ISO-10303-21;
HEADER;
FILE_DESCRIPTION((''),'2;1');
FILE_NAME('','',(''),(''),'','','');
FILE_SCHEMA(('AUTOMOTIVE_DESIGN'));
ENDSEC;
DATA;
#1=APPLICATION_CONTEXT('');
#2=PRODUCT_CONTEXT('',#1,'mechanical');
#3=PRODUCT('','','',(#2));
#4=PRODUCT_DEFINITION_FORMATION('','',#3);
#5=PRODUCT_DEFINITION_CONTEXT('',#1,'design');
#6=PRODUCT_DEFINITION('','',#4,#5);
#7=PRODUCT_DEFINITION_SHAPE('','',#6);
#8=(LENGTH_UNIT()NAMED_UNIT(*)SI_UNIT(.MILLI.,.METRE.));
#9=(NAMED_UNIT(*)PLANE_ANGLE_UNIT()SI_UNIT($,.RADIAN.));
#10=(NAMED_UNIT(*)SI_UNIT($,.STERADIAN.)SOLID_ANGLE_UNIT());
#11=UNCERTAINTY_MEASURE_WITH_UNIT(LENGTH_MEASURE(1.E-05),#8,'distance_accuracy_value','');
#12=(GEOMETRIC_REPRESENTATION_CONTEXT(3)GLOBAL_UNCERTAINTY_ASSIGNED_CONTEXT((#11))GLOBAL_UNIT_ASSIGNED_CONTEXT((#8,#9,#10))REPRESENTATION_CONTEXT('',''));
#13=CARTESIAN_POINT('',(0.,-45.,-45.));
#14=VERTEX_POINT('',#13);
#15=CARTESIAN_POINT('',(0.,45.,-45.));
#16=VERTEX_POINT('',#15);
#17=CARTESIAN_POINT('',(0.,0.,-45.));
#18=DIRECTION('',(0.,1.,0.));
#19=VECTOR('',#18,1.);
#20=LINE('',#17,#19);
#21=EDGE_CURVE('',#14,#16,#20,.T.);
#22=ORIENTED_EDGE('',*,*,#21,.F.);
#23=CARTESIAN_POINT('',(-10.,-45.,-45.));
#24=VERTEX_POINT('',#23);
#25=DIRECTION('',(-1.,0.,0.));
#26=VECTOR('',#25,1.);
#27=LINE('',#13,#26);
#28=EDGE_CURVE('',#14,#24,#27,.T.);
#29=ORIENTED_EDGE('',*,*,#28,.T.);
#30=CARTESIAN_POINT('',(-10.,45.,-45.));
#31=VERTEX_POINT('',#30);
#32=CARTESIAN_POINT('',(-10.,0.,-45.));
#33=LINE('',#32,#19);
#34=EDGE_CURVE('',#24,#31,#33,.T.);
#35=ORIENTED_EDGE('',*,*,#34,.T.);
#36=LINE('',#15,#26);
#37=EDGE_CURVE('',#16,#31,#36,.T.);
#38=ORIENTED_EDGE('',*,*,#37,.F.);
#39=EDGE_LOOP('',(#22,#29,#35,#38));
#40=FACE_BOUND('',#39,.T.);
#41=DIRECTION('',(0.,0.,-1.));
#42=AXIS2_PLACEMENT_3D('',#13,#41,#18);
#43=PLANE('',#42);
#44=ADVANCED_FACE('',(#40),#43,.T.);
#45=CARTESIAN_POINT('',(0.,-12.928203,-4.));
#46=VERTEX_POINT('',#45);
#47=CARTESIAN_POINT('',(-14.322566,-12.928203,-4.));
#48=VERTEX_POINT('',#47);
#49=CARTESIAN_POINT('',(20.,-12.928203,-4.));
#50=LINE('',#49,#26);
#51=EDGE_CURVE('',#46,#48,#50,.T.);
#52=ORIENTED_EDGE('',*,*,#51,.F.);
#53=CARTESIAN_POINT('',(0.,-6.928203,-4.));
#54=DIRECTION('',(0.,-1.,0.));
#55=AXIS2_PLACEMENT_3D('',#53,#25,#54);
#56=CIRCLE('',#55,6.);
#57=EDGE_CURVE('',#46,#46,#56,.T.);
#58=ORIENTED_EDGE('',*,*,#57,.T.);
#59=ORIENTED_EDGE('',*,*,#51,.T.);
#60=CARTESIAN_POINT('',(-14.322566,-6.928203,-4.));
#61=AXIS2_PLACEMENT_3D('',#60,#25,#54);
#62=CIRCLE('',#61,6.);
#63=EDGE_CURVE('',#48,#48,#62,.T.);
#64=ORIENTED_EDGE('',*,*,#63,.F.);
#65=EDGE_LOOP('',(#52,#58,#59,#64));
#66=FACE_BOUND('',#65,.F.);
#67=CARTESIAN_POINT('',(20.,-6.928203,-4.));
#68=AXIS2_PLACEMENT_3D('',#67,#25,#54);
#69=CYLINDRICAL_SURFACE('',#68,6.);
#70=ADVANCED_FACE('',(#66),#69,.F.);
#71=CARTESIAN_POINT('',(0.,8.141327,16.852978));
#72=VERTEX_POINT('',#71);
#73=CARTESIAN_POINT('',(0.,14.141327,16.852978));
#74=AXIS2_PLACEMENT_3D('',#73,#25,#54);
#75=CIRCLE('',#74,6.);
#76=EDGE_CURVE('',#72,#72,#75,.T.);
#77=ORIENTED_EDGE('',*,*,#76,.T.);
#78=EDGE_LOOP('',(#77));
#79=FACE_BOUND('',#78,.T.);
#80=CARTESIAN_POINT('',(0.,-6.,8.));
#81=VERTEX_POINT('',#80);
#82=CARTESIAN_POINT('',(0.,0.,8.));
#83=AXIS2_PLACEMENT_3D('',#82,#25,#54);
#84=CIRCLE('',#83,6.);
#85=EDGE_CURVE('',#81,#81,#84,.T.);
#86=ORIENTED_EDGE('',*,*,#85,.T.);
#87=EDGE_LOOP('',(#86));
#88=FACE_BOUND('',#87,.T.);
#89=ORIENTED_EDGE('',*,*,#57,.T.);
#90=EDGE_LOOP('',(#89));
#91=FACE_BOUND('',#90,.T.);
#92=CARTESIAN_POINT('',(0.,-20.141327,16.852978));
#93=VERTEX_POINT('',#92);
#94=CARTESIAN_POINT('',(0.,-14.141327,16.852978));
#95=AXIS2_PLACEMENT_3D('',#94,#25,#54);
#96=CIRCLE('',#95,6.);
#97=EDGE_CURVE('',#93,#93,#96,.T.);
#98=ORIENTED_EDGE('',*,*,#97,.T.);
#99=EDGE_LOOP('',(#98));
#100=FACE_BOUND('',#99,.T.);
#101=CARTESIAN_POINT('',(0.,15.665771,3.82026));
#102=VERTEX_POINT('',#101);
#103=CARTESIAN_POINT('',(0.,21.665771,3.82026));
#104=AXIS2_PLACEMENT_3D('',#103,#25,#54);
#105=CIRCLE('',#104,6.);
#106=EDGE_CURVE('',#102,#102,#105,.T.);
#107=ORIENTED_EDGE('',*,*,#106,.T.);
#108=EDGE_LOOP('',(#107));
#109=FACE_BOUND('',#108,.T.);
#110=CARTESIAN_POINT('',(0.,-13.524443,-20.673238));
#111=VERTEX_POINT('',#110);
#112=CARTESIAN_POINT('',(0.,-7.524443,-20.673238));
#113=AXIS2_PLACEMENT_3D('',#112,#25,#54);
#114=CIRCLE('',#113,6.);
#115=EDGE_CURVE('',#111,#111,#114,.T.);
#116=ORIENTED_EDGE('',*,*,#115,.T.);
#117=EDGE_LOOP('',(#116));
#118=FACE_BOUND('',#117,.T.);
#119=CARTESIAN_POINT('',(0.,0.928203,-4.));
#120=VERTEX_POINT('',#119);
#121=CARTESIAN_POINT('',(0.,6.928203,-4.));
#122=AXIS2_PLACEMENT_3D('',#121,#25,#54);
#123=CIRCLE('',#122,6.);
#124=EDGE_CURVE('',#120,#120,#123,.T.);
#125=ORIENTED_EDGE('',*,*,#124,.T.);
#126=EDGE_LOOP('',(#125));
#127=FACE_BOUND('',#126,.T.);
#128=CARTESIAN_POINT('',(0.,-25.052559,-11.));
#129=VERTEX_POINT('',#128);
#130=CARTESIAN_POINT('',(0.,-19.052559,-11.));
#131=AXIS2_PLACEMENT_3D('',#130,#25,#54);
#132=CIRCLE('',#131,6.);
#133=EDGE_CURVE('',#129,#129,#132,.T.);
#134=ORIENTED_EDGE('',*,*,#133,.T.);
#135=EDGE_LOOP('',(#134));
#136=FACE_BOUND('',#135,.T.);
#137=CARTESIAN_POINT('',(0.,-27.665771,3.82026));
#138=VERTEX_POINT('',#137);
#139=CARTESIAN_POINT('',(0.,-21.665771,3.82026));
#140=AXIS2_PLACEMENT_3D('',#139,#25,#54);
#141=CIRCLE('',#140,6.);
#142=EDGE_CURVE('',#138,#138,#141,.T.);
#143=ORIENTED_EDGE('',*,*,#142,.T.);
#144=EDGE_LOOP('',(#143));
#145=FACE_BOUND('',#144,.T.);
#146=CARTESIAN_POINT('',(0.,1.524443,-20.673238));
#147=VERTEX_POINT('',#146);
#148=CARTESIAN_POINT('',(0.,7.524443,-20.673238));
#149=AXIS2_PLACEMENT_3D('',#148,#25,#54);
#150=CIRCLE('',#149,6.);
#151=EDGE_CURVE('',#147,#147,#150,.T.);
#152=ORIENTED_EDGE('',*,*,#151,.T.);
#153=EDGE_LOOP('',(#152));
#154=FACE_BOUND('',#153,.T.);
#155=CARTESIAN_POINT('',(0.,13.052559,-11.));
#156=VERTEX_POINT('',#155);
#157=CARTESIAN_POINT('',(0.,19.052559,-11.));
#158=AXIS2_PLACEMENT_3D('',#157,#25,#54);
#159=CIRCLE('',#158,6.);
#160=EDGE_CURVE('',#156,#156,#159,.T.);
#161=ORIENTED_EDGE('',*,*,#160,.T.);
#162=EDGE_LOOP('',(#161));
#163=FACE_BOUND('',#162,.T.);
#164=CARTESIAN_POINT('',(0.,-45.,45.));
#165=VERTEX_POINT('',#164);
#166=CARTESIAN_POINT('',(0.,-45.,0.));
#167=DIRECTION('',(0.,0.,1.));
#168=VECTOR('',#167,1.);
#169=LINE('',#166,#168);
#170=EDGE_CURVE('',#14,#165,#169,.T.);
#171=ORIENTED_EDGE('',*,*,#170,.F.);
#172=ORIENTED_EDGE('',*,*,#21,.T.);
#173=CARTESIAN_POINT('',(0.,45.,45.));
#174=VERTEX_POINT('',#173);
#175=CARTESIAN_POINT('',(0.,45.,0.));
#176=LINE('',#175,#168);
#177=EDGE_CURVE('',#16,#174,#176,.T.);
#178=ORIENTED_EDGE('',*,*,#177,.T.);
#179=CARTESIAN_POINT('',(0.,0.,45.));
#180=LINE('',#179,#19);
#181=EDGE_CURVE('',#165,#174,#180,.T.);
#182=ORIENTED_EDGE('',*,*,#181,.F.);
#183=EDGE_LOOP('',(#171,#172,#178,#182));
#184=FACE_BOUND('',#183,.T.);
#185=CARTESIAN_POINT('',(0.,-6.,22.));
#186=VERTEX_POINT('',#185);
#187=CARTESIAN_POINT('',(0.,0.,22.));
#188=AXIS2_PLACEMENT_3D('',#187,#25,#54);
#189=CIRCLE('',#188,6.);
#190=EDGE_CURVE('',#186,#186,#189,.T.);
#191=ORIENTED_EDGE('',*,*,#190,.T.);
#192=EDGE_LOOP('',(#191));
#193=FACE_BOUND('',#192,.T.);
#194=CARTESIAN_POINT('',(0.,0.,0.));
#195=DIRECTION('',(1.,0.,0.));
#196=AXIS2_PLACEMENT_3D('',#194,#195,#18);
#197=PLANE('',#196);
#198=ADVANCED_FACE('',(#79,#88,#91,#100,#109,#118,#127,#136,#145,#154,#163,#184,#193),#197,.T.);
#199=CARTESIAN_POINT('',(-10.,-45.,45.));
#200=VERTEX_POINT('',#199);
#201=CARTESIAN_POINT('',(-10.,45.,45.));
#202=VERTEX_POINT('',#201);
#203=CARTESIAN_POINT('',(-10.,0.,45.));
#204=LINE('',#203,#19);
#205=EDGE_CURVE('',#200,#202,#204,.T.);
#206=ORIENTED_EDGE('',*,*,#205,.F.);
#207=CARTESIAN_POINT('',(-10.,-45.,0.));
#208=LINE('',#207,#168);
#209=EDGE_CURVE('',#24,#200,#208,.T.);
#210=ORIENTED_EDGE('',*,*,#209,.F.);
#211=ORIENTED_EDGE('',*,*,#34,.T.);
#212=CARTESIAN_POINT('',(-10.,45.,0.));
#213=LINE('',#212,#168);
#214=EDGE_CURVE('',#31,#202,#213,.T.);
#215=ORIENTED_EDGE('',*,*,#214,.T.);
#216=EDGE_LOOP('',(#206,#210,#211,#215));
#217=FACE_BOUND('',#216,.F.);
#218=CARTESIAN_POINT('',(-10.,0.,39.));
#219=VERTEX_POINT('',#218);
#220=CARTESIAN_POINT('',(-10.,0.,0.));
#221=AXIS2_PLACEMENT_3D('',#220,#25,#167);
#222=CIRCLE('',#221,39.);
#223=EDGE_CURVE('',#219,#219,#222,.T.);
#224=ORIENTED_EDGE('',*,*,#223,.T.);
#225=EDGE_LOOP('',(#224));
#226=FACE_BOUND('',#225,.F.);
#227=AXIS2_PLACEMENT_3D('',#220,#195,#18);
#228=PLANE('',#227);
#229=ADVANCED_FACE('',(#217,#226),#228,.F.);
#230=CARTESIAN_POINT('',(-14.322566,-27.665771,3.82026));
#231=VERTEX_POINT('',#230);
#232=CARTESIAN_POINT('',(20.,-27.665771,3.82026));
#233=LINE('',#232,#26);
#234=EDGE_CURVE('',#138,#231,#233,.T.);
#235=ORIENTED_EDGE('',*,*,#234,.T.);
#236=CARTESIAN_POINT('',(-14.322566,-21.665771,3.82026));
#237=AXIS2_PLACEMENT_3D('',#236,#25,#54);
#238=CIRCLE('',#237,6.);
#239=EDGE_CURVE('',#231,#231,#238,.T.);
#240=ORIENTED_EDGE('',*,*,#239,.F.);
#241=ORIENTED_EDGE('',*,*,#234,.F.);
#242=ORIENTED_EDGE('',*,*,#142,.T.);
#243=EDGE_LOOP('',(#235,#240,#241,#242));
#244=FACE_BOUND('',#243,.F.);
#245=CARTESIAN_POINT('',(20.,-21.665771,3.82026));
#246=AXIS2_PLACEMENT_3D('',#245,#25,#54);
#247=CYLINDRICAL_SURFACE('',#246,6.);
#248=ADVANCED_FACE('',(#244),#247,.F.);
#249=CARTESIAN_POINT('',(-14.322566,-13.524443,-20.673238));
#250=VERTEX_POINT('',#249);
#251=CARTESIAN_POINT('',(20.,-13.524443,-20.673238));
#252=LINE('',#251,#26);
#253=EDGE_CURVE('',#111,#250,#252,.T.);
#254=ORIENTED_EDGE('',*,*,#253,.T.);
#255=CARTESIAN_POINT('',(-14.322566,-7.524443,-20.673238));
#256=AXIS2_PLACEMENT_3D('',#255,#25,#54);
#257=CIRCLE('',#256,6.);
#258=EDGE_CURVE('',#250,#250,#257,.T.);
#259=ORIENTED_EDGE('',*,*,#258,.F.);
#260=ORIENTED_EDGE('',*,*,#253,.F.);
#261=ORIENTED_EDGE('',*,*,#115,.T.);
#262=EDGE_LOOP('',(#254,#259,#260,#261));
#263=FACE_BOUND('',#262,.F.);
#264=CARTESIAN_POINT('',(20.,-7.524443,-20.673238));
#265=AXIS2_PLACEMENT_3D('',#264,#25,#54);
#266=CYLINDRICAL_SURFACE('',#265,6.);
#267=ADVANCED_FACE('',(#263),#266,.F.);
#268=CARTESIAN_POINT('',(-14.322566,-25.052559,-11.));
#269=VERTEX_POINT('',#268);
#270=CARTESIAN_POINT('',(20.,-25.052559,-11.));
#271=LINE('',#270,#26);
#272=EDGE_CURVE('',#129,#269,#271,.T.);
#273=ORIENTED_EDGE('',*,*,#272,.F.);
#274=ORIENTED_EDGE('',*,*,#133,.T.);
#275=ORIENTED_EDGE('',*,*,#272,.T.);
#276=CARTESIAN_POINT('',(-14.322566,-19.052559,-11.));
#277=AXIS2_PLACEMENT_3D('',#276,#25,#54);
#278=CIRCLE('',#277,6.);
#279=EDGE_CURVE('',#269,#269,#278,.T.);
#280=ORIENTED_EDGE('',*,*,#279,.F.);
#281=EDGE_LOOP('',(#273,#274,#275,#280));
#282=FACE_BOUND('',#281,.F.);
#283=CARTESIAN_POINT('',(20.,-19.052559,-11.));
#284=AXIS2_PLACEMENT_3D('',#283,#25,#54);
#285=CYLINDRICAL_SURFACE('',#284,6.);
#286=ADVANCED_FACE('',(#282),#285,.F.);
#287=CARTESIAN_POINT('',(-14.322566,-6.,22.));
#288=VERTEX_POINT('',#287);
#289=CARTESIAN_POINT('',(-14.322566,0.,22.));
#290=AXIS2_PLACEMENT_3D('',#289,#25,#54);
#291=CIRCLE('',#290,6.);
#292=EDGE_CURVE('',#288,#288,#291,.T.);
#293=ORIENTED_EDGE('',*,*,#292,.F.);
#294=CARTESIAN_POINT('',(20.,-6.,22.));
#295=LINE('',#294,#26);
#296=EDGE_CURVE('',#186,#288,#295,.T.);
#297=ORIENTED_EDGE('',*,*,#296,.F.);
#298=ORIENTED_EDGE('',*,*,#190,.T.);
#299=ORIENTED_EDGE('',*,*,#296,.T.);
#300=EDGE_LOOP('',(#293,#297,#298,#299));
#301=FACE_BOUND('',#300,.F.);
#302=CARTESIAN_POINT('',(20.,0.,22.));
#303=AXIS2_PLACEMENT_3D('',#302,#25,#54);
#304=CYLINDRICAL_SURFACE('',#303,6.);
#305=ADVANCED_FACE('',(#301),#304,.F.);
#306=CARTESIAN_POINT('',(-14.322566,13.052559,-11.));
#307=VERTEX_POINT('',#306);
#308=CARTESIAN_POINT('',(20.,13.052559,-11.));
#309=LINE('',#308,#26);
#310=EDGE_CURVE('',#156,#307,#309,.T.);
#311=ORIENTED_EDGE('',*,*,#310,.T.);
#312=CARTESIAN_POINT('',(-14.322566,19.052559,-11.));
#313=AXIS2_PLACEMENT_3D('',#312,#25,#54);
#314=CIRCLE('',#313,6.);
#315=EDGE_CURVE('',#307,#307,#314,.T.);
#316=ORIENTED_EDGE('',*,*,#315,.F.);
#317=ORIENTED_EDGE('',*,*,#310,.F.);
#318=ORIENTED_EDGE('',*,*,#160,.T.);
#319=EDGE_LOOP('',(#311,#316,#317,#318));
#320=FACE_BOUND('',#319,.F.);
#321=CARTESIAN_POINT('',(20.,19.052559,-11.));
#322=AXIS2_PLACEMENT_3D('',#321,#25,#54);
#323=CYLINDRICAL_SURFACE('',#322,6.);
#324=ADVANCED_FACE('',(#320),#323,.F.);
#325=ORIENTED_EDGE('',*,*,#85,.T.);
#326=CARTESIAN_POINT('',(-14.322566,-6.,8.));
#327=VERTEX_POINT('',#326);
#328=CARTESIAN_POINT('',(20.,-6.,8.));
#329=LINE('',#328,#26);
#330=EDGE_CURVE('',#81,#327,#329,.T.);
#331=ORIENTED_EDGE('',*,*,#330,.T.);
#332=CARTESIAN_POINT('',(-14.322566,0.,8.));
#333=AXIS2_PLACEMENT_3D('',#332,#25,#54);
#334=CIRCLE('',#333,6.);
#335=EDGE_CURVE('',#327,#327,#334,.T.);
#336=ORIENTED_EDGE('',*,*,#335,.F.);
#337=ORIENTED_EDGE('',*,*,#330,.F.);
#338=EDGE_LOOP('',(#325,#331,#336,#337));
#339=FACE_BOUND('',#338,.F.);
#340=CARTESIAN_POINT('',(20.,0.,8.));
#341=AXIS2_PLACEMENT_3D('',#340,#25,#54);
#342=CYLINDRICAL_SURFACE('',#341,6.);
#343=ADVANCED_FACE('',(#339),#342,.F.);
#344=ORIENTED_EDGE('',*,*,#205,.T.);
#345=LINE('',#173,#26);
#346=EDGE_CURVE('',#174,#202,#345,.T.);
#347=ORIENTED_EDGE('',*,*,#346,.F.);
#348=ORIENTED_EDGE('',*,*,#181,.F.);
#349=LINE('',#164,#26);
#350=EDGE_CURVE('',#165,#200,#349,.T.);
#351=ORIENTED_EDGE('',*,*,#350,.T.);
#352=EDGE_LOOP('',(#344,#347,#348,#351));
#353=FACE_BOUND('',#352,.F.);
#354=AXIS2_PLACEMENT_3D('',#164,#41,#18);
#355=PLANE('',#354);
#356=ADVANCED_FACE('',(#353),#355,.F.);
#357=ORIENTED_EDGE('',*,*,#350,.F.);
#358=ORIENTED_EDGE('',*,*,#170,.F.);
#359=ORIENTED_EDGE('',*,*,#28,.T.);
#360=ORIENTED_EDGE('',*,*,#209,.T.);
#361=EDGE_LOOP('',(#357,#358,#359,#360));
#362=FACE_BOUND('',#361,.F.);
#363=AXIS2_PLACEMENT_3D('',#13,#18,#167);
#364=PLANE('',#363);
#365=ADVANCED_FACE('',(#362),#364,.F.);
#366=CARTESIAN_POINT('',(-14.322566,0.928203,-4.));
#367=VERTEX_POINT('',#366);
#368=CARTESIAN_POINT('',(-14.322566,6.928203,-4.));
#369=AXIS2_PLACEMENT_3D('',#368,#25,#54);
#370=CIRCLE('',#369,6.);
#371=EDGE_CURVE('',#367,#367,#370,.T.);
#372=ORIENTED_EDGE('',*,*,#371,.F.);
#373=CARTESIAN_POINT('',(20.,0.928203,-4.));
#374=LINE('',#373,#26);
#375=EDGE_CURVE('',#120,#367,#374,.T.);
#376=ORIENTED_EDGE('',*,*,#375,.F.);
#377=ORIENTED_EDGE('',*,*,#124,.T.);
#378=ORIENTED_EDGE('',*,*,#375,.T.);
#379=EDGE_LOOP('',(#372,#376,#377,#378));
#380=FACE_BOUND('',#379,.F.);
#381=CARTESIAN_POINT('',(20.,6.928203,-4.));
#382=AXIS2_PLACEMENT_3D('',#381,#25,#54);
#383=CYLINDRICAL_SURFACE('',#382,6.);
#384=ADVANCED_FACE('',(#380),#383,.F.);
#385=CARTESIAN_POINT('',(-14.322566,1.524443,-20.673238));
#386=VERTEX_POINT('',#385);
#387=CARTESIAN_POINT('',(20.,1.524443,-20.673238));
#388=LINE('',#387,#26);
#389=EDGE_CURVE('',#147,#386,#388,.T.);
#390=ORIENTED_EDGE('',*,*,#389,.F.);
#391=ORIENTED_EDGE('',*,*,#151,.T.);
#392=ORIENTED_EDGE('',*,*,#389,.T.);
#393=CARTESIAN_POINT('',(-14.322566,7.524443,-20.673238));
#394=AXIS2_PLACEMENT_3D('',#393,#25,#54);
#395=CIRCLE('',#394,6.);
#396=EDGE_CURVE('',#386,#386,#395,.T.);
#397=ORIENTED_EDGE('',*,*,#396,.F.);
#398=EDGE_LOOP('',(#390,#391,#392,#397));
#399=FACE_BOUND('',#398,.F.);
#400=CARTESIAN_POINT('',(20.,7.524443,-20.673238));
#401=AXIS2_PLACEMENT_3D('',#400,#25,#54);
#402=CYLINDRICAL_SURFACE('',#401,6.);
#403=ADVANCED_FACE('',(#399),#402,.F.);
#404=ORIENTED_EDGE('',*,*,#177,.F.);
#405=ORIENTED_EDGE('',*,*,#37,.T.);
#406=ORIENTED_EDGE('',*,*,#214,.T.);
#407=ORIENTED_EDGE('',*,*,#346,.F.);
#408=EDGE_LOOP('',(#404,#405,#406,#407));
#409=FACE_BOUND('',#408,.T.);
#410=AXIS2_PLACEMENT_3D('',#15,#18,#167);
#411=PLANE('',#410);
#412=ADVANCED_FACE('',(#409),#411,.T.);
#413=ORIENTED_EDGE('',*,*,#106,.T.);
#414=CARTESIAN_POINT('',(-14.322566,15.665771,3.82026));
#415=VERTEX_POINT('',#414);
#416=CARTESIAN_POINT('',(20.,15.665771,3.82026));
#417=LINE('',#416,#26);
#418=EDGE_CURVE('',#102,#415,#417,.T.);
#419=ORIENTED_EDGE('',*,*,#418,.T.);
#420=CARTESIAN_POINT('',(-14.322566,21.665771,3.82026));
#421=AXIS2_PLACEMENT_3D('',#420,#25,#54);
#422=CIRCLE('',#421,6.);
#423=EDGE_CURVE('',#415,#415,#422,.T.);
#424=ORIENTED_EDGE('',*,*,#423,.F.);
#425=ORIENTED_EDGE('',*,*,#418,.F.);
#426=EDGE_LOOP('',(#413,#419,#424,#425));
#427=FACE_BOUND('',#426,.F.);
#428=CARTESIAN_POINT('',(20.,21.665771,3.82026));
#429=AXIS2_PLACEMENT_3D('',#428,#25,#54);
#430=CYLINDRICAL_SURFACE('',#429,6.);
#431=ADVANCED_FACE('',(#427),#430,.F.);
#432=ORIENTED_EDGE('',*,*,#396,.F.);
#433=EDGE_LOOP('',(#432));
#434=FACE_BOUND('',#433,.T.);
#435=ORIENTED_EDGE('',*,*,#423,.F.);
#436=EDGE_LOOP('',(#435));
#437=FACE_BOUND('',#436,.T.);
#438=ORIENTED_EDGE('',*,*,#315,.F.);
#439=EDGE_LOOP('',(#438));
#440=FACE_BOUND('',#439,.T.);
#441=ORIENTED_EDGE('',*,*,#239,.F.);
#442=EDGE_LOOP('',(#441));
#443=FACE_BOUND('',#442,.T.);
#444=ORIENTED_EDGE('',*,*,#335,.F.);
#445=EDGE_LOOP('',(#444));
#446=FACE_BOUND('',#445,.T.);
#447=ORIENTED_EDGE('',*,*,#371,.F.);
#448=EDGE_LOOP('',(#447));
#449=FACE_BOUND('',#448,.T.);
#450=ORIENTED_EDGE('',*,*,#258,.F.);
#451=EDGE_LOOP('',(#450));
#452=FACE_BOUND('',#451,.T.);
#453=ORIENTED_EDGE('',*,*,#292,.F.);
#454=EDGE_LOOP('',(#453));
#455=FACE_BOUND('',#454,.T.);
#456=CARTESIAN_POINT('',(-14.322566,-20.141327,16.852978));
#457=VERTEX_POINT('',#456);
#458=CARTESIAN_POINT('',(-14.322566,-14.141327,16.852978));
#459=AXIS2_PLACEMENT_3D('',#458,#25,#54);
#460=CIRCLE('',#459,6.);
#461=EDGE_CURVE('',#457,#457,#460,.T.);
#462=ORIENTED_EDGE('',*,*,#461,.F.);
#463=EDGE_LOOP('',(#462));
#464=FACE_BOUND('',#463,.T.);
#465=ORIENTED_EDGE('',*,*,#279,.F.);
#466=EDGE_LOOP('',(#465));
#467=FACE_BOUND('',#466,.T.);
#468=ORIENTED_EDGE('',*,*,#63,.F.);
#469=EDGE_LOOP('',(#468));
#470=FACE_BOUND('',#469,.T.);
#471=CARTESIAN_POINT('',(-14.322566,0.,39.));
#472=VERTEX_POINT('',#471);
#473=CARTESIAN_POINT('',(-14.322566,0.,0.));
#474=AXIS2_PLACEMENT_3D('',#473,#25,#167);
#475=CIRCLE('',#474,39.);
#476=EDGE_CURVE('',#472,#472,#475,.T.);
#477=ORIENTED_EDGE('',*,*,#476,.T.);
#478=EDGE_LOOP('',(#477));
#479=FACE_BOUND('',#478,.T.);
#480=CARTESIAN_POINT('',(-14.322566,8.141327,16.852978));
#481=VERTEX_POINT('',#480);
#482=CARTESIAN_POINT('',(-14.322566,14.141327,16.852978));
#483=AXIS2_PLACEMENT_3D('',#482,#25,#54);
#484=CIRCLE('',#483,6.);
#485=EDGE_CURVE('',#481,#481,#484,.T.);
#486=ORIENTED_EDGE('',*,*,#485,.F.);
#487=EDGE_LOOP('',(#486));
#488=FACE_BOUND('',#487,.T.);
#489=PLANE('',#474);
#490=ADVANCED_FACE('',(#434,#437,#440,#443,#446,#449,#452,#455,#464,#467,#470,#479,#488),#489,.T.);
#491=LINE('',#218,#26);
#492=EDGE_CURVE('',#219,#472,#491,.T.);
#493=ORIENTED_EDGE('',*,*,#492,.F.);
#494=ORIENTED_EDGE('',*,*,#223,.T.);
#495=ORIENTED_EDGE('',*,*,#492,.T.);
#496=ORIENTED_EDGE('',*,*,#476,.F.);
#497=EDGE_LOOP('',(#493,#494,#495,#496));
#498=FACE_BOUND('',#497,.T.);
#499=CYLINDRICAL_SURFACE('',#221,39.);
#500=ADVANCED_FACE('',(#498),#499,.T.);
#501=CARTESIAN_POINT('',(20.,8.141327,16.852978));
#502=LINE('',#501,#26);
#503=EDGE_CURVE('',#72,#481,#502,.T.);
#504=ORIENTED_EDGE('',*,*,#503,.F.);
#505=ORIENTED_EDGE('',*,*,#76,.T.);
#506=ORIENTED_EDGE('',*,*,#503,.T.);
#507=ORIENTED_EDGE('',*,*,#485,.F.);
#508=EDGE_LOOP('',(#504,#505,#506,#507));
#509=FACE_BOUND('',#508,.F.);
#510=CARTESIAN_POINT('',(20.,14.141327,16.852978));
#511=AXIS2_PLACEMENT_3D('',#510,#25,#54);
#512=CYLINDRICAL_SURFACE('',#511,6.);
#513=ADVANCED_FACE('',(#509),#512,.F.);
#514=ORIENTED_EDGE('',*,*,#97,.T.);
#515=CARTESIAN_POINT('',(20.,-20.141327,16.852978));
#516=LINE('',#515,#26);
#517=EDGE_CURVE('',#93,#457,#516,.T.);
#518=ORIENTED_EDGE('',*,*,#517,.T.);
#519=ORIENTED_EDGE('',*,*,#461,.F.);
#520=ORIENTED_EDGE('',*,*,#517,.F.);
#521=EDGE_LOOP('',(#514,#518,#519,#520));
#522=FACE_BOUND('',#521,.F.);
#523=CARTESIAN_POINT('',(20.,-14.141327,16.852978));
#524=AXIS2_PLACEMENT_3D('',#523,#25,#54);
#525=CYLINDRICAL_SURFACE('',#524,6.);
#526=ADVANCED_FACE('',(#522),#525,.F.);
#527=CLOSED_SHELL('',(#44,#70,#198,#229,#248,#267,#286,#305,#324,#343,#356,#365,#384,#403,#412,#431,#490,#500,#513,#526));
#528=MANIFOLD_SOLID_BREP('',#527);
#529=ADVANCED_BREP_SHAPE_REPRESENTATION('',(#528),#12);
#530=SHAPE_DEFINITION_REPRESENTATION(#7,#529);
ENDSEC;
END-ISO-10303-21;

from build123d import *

# Parameters (mm, degrees)
F2_W     = 90
F2_H     = 90
F3_DEPTH = 10
F4_D     = 12
F4_DEPTH = 20
F4_TIP   = 3.6051637142


# Not quite as in the source:
# - a feature names something its author has since deleted; it is built from what else it names


with BuildPart() as f1:
    # F0 (on Front) → F1 (revolve)
    with BuildSketch(Plane.XZ):
        Polygon((-14.3225658685, 0), (-10, 0), (-10, 32.5), (-10, 39), (-14.3225658685, 39), (-14.3225658685, 34.4556160271), (-14.3225658685, 32.5), align=None)
    revolve(axis=Axis((-45.5725640059, 0, 0), (-1, 0, 0)))

    # F2 (on Right) → F3 (join)
    with BuildSketch(Plane.YZ):
        Rectangle(F2_W, F2_H)
    extrude(amount=-F3_DEPTH)

    # F4
    with Locations(Plane.YZ):
        with Locations((-6.9282032303, -4), (6.9282032303, -4), (0, 8), (-21.6657705663, 3.8202599087), (-14.1413274131, 16.8529777486), (0, 22), (14.1413274131, 16.8529777486), (21.6657705663, 3.8202599087), (19.0525588833, -11), (7.5244431532, -20.6732376573), (-7.5244431532, -20.6732376573), (-19.0525588833, -11)):
            Hole(F4_D / 2, depth=F4_DEPTH)
            with Locations((0, 0, -(F4_DEPTH + F4_TIP / 2))):  # 118° drill point
                Cone(0, F4_D / 2, F4_TIP, mode=Mode.SUBTRACT)


solid = f1.part
